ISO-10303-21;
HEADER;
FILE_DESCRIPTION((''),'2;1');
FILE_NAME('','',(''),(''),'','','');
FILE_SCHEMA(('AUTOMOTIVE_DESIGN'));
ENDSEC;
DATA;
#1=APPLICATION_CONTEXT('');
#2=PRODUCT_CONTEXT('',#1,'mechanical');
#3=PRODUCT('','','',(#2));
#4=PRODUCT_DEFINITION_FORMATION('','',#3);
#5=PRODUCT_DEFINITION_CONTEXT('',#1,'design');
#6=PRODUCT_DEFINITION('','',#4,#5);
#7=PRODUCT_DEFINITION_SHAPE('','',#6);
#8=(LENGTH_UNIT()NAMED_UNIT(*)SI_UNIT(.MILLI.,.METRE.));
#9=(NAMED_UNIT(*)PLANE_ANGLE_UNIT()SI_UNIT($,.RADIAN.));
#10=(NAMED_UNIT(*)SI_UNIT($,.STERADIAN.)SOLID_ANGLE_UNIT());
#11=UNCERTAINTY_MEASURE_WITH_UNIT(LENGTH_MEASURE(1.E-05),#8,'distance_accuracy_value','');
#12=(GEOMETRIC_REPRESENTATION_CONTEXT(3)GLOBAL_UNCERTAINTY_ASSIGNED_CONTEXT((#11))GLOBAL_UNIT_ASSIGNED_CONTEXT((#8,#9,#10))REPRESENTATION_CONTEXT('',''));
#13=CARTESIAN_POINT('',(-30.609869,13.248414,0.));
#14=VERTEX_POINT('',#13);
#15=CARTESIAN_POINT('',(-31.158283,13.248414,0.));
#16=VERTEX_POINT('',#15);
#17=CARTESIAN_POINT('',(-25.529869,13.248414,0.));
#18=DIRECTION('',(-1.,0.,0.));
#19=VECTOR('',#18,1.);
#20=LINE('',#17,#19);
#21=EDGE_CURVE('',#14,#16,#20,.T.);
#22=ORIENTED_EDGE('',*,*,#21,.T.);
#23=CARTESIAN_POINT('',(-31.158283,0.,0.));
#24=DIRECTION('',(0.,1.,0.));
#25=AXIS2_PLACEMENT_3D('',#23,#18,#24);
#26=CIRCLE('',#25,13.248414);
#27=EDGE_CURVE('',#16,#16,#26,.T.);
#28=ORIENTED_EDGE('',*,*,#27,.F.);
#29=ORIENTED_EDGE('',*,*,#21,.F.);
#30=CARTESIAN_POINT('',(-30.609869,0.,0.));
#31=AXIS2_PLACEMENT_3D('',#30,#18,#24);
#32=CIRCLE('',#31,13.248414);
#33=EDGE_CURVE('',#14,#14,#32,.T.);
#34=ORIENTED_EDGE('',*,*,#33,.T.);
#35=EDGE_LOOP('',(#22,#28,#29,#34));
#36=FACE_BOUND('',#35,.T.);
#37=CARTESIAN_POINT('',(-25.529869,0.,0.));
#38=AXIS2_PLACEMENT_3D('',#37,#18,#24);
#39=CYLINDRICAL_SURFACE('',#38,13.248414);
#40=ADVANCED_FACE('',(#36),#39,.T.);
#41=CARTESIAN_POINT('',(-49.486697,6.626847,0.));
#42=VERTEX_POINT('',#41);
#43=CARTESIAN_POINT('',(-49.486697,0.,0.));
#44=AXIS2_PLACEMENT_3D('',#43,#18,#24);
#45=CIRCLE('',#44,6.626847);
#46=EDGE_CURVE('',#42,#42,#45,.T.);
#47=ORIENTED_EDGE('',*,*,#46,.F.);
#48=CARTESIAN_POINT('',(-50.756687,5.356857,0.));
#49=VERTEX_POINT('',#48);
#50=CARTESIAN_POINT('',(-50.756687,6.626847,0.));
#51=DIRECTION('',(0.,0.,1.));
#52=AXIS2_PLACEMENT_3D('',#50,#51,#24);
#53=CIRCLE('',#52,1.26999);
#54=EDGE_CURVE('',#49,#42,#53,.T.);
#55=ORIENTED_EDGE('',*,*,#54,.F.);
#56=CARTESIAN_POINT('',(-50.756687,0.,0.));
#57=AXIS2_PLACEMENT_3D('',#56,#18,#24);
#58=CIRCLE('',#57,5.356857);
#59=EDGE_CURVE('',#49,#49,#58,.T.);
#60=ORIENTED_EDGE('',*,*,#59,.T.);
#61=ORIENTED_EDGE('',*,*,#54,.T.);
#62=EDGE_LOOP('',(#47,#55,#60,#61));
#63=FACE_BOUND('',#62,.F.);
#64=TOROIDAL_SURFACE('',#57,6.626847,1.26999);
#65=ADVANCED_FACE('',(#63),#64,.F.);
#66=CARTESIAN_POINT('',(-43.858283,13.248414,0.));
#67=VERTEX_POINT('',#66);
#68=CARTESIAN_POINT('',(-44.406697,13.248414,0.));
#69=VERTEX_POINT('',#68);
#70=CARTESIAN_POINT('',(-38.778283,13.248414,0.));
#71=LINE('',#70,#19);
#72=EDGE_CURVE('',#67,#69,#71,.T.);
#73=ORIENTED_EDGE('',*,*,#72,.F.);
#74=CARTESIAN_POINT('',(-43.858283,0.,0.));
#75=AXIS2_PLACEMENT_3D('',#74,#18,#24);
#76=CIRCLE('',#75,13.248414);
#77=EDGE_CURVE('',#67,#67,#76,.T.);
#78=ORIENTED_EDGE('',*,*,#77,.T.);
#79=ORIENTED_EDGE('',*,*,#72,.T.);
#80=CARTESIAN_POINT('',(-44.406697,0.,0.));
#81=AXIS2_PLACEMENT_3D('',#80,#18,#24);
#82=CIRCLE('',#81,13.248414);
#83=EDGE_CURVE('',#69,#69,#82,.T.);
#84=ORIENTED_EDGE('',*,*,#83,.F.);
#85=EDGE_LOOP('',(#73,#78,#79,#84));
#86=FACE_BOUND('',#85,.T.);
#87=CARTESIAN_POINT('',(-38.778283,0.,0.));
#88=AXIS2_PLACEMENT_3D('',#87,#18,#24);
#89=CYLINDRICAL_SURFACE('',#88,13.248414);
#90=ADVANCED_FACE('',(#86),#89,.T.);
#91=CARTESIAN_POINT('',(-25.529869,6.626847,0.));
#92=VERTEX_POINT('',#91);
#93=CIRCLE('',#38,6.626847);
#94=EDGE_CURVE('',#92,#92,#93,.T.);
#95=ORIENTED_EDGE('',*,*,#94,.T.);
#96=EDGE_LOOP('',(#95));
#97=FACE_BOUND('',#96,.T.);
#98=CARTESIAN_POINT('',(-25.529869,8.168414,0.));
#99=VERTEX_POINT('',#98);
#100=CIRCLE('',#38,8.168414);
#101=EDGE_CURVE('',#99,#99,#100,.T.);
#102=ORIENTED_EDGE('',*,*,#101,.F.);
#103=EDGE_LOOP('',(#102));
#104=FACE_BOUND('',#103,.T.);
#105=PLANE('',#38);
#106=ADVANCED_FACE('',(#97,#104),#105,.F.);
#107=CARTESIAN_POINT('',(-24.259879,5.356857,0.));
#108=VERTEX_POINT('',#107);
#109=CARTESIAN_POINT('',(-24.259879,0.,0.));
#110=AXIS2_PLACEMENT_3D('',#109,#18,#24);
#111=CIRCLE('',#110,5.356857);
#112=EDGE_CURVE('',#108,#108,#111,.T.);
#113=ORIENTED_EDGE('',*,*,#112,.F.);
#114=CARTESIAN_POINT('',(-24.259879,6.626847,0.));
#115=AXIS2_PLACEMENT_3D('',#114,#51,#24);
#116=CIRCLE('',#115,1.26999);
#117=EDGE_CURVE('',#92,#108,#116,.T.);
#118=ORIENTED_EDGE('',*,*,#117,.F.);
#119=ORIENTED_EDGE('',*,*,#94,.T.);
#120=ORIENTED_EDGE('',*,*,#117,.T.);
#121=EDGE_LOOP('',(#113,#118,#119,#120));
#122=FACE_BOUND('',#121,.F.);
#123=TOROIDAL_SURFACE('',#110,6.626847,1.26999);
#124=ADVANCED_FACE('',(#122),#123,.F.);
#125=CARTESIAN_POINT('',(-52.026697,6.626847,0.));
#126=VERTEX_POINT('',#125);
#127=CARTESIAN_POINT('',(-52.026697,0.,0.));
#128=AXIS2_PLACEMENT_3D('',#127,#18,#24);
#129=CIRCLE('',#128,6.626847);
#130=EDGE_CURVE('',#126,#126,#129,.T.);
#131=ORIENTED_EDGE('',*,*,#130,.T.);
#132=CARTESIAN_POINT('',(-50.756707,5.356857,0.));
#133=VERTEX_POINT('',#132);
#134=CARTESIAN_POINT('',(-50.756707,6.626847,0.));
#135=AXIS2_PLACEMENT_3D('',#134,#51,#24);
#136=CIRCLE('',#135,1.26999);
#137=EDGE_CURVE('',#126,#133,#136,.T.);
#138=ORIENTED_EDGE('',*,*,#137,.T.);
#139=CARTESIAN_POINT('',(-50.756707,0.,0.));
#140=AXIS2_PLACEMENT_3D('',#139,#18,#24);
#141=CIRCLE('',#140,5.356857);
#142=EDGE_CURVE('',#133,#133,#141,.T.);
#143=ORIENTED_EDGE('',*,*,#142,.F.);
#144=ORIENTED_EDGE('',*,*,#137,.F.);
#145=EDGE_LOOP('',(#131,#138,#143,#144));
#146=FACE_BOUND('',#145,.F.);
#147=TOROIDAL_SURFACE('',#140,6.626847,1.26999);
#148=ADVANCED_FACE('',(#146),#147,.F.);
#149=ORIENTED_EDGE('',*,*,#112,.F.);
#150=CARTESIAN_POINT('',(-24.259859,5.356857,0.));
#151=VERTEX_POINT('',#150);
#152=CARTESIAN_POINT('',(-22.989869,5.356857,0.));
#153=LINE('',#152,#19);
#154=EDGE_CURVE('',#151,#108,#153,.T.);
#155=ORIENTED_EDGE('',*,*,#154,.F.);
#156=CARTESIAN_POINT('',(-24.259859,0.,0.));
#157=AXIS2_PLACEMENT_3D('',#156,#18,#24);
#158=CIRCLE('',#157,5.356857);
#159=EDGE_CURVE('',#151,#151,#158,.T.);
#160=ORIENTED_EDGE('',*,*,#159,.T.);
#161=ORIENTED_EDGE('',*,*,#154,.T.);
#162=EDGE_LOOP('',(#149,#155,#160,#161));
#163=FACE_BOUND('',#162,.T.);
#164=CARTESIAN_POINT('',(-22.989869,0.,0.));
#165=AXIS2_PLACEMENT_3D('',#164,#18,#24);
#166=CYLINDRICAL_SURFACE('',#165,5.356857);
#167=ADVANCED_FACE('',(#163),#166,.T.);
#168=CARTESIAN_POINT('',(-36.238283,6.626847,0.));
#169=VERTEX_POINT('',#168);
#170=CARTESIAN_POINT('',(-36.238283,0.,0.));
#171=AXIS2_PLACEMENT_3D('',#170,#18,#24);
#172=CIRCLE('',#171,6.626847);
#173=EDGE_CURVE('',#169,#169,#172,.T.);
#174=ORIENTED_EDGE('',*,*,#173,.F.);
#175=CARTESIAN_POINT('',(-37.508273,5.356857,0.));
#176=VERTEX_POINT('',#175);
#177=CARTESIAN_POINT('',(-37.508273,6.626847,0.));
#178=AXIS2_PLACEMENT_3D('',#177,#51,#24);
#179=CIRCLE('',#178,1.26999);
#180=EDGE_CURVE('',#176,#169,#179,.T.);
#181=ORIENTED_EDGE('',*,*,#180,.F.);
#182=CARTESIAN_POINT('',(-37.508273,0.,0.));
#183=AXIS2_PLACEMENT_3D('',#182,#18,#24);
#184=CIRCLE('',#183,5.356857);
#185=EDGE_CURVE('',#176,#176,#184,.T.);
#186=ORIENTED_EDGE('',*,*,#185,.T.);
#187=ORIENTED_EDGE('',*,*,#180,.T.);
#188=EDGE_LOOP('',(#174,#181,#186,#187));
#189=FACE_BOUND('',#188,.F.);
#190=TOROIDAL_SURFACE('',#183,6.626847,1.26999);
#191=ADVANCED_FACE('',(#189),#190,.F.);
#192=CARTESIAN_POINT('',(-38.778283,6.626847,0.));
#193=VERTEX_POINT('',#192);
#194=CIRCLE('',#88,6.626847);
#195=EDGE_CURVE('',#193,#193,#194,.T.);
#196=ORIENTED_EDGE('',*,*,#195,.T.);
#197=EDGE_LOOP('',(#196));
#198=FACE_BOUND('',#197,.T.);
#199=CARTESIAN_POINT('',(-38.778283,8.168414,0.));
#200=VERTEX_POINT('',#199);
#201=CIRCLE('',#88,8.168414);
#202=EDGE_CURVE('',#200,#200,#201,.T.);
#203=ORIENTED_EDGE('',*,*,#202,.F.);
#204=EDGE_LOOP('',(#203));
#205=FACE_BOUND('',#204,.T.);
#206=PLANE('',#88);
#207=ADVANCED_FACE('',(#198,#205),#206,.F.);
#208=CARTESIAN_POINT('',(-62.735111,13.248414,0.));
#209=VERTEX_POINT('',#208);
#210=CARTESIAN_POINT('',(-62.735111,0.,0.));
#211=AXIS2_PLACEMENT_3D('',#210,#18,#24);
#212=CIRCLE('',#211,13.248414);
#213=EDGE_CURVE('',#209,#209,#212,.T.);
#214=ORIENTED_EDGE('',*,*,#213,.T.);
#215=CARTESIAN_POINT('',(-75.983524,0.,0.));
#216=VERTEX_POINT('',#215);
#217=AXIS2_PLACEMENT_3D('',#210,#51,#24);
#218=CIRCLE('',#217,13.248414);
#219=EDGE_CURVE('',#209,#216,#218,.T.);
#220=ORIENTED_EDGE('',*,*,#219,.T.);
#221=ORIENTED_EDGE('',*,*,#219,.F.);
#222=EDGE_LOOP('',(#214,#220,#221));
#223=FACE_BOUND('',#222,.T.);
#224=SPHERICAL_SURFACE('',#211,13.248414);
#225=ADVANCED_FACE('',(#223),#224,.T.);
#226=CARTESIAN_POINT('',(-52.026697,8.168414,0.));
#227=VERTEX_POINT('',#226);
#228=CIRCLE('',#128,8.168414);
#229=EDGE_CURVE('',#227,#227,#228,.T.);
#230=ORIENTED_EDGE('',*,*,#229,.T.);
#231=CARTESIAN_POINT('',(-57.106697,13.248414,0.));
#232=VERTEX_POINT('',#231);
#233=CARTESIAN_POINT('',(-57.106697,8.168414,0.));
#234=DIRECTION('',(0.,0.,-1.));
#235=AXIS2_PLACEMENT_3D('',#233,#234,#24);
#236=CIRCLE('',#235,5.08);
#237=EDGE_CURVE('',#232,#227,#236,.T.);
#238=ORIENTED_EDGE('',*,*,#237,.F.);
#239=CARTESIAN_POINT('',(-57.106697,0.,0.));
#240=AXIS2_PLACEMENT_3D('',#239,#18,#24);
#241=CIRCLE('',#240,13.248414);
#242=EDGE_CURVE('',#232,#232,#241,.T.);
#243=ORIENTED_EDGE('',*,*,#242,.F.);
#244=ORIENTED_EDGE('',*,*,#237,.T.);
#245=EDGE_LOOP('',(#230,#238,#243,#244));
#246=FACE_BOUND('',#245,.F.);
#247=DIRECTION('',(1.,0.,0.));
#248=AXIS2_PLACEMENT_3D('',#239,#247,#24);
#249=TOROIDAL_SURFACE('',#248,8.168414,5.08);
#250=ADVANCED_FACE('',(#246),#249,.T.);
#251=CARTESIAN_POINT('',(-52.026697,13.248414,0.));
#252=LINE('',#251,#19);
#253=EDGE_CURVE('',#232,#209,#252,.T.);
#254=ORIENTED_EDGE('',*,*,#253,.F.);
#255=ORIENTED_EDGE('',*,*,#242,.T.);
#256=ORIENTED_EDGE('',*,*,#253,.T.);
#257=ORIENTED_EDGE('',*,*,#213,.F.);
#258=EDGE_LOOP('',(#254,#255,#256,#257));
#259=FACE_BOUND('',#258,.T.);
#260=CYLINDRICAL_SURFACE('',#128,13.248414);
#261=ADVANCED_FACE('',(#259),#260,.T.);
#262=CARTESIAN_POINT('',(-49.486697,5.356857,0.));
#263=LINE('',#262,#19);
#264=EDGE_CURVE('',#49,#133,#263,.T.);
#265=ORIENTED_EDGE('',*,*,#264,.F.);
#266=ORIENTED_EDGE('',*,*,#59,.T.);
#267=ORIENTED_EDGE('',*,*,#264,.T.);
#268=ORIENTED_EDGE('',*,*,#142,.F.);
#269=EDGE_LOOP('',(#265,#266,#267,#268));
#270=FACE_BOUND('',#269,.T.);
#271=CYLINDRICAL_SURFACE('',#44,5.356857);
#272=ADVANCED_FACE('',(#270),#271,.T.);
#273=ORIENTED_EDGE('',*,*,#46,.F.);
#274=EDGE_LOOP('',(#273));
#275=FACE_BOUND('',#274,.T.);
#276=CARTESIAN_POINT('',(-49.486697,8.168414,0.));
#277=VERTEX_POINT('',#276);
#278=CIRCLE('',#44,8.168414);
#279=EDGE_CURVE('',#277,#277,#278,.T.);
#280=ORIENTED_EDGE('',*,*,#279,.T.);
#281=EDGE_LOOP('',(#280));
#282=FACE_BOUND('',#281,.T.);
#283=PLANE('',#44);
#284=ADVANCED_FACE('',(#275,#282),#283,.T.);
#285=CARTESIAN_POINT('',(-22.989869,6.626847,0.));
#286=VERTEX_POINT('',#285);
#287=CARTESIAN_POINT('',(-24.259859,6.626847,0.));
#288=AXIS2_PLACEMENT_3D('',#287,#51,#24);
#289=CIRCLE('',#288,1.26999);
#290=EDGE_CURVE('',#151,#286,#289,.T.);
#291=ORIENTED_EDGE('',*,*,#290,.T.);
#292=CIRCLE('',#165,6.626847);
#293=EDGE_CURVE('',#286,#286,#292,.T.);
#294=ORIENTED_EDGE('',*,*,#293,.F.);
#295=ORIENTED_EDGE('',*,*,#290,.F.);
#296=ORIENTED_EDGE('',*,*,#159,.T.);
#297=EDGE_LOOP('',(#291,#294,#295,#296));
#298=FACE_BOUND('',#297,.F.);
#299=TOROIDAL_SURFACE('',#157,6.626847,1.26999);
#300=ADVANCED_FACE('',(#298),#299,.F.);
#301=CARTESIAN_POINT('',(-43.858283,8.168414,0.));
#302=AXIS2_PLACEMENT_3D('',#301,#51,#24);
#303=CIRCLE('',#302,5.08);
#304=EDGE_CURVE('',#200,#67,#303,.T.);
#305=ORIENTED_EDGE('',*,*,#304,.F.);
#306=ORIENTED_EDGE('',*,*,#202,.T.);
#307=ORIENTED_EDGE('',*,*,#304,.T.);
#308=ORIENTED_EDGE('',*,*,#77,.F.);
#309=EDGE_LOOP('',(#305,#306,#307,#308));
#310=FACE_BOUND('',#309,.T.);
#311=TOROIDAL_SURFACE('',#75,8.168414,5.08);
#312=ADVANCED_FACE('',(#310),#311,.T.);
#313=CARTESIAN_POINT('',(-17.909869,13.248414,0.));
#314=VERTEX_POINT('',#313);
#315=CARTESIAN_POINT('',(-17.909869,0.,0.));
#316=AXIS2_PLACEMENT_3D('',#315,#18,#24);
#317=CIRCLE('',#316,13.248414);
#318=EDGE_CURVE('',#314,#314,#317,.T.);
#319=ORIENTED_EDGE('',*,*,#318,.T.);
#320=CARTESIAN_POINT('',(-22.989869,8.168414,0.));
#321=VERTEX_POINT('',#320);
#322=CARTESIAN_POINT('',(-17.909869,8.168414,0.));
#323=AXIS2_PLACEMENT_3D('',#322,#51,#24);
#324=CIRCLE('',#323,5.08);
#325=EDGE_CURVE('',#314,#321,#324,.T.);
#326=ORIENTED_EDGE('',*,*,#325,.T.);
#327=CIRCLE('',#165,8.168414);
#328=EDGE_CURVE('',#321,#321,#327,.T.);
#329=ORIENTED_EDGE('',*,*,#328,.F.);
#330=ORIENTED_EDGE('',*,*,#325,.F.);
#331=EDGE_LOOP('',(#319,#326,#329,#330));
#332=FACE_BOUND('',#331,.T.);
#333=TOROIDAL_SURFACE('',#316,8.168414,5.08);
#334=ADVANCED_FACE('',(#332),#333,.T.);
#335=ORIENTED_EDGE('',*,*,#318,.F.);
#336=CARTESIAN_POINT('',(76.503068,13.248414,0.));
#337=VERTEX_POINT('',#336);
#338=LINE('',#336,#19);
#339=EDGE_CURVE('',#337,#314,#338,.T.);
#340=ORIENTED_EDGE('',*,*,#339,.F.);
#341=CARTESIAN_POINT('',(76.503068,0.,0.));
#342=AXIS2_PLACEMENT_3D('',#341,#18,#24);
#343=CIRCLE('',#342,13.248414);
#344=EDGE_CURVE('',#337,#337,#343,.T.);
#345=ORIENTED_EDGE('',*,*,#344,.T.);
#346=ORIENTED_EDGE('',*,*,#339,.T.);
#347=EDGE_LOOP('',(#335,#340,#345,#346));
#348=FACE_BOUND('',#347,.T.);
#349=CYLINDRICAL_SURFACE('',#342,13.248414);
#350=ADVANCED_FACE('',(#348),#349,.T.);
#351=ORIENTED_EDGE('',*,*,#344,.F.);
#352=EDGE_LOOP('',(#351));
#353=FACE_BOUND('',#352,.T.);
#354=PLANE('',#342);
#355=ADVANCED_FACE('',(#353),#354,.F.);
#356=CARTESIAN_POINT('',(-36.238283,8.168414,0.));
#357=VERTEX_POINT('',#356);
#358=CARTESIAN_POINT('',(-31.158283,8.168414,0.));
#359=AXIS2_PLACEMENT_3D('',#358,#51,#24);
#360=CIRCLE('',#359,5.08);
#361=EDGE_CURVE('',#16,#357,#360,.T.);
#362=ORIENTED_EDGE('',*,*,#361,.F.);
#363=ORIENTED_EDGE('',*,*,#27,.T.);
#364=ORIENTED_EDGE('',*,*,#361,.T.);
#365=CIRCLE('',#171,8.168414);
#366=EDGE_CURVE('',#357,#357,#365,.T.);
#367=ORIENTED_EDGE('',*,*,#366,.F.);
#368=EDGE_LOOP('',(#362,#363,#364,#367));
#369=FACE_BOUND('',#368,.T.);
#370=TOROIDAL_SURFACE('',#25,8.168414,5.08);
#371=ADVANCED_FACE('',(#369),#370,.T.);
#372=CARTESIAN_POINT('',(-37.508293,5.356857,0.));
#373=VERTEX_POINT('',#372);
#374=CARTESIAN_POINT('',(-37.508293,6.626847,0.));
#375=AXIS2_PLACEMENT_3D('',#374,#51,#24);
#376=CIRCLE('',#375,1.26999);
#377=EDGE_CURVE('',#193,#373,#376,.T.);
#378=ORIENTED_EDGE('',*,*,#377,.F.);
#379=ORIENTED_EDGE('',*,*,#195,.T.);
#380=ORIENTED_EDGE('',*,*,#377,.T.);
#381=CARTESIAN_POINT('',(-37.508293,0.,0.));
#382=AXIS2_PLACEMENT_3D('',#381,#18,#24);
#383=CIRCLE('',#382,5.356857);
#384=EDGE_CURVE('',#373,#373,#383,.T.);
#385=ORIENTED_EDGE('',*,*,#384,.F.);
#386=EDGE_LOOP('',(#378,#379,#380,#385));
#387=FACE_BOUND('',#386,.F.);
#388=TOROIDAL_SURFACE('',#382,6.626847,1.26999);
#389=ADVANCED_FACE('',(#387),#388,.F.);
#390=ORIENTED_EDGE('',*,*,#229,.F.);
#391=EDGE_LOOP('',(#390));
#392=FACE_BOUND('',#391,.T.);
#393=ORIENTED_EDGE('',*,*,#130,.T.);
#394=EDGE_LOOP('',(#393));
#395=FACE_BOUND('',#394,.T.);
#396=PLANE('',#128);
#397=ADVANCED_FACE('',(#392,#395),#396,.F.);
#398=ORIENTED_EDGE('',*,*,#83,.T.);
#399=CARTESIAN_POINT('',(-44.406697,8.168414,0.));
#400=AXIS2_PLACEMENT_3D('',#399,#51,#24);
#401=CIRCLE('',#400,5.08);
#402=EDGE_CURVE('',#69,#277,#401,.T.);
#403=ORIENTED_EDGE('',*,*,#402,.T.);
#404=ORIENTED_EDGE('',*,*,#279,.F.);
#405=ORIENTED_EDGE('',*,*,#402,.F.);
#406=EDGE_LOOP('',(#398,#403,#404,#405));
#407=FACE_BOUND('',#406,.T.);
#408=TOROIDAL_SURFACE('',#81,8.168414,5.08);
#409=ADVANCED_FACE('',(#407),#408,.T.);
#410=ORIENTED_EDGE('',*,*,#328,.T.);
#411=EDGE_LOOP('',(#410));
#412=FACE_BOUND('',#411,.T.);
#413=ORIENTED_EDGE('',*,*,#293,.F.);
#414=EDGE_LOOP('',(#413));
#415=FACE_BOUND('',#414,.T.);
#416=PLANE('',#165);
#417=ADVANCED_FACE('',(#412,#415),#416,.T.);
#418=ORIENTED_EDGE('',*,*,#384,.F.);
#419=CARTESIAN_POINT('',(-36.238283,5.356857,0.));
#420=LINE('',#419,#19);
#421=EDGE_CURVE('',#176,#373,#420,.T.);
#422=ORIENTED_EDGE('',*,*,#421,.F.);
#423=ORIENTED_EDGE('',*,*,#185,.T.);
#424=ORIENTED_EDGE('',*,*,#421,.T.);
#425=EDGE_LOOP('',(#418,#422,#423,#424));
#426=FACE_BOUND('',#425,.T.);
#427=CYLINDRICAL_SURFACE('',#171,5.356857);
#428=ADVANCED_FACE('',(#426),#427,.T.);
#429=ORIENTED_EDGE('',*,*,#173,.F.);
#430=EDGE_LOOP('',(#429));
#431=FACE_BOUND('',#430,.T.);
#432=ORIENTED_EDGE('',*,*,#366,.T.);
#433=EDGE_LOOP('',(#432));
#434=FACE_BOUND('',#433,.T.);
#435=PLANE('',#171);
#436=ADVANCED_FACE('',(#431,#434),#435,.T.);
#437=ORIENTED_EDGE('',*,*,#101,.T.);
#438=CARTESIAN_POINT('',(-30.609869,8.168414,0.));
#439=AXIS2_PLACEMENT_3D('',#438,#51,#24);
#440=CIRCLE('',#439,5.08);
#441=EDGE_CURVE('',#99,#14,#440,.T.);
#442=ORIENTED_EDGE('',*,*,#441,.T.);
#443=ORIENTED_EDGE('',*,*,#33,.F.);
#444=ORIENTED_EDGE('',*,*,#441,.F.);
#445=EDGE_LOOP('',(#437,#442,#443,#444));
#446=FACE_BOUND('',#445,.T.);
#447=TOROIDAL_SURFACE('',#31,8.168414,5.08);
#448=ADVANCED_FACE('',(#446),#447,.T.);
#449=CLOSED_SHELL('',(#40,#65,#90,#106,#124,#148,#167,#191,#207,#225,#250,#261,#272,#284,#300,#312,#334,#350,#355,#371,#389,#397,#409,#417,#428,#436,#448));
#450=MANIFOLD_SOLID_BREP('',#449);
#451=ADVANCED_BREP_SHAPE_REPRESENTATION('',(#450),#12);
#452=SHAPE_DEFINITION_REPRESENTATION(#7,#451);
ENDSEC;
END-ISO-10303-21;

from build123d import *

# Parameters (mm, degrees)
F2_R = 5.08
F3_R = 1.26999


# Not quite as in the source:
# - a fillet or chamfer is up to 0.001 mm smaller than in the source, because OpenCascade refuses the exact size


with BuildPart() as f1:
    # F0 (on Top) → F1 (revolve)
    with BuildSketch(Plane.XY):
        with BuildLine():
            Line((-52.0266967201, 13.2484138012), (-62.7351105213, 13.2484138012))
            ThreePointArc((-62.7351105213, 13.2484138012), (-72.1031537601, 9.3680432388), (-75.9835243225, 0))
            Line((-75.9835243225, 0), (76.5030682087, 0))
            Line((76.5030682087, 0), (76.5030682087, 13.2484138012))
            Line((76.5030682087, 13.2484138012), (-22.9898691177, 13.2484138012))
            Line((-22.9898691177, 13.2484138012), (-22.9898691177, 5.3568566218))
            Line((-22.9898691177, 5.3568566218), (-25.5298691177, 5.3568566218))
            Line((-25.5298691177, 5.3568566218), (-25.5298691177, 13.2484138012))
            Line((-25.5298691177, 13.2484138012), (-36.2382829189, 13.2484138012))
            Line((-36.2382829189, 13.2484138012), (-36.2382829189, 5.3568566218))
            Line((-36.2382829189, 5.3568566218), (-38.7782829189, 5.3568566218))
            Line((-38.7782829189, 5.3568566218), (-38.7782829189, 13.2484138012))
            Line((-38.7782829189, 13.2484138012), (-49.4866967201, 13.2484138012))
            Line((-49.4866967201, 13.2484138012), (-49.4866967201, 5.3568566218))
            Line((-49.4866967201, 5.3568566218), (-52.0266967201, 5.3568566218))
            Line((-52.0266967201, 5.3568566218), (-52.0266967201, 13.2484138012))
        make_face()
    revolve(axis=Axis((0.2597719431, 0, 0), (-1, 0, 0)))

    # F2
    f2_edges = [f1.edges().sort_by_distance(p)[0] for p in [
        (-52.026697, -13.248414, 0),
        (-49.486697, -13.248414, 0),
        (-38.778283, -13.248414, 0),
        (-36.238283, -13.248414, 0),
        (-25.529869, -13.248414, 0),
        (-22.989869, -13.248414, 0),
    ]]
    fillet(f2_edges, radius=F2_R)

    # F3 (radius 1.27 in the source; OpenCascade refuses exactly that, so slightly less here)
    f3_edges = [f1.edges().sort_by_distance(p)[0] for p in [
        (-49.486697, -5.356857, 0),
        (-52.026697, -5.356857, 0),
        (-36.238283, -5.356857, 0),
        (-38.778283, -5.356857, 0),
        (-25.529869, -5.356857, 0),
        (-22.989869, -5.356857, 0),
    ]]
    fillet(f3_edges, radius=F3_R)


solid = f1.part
